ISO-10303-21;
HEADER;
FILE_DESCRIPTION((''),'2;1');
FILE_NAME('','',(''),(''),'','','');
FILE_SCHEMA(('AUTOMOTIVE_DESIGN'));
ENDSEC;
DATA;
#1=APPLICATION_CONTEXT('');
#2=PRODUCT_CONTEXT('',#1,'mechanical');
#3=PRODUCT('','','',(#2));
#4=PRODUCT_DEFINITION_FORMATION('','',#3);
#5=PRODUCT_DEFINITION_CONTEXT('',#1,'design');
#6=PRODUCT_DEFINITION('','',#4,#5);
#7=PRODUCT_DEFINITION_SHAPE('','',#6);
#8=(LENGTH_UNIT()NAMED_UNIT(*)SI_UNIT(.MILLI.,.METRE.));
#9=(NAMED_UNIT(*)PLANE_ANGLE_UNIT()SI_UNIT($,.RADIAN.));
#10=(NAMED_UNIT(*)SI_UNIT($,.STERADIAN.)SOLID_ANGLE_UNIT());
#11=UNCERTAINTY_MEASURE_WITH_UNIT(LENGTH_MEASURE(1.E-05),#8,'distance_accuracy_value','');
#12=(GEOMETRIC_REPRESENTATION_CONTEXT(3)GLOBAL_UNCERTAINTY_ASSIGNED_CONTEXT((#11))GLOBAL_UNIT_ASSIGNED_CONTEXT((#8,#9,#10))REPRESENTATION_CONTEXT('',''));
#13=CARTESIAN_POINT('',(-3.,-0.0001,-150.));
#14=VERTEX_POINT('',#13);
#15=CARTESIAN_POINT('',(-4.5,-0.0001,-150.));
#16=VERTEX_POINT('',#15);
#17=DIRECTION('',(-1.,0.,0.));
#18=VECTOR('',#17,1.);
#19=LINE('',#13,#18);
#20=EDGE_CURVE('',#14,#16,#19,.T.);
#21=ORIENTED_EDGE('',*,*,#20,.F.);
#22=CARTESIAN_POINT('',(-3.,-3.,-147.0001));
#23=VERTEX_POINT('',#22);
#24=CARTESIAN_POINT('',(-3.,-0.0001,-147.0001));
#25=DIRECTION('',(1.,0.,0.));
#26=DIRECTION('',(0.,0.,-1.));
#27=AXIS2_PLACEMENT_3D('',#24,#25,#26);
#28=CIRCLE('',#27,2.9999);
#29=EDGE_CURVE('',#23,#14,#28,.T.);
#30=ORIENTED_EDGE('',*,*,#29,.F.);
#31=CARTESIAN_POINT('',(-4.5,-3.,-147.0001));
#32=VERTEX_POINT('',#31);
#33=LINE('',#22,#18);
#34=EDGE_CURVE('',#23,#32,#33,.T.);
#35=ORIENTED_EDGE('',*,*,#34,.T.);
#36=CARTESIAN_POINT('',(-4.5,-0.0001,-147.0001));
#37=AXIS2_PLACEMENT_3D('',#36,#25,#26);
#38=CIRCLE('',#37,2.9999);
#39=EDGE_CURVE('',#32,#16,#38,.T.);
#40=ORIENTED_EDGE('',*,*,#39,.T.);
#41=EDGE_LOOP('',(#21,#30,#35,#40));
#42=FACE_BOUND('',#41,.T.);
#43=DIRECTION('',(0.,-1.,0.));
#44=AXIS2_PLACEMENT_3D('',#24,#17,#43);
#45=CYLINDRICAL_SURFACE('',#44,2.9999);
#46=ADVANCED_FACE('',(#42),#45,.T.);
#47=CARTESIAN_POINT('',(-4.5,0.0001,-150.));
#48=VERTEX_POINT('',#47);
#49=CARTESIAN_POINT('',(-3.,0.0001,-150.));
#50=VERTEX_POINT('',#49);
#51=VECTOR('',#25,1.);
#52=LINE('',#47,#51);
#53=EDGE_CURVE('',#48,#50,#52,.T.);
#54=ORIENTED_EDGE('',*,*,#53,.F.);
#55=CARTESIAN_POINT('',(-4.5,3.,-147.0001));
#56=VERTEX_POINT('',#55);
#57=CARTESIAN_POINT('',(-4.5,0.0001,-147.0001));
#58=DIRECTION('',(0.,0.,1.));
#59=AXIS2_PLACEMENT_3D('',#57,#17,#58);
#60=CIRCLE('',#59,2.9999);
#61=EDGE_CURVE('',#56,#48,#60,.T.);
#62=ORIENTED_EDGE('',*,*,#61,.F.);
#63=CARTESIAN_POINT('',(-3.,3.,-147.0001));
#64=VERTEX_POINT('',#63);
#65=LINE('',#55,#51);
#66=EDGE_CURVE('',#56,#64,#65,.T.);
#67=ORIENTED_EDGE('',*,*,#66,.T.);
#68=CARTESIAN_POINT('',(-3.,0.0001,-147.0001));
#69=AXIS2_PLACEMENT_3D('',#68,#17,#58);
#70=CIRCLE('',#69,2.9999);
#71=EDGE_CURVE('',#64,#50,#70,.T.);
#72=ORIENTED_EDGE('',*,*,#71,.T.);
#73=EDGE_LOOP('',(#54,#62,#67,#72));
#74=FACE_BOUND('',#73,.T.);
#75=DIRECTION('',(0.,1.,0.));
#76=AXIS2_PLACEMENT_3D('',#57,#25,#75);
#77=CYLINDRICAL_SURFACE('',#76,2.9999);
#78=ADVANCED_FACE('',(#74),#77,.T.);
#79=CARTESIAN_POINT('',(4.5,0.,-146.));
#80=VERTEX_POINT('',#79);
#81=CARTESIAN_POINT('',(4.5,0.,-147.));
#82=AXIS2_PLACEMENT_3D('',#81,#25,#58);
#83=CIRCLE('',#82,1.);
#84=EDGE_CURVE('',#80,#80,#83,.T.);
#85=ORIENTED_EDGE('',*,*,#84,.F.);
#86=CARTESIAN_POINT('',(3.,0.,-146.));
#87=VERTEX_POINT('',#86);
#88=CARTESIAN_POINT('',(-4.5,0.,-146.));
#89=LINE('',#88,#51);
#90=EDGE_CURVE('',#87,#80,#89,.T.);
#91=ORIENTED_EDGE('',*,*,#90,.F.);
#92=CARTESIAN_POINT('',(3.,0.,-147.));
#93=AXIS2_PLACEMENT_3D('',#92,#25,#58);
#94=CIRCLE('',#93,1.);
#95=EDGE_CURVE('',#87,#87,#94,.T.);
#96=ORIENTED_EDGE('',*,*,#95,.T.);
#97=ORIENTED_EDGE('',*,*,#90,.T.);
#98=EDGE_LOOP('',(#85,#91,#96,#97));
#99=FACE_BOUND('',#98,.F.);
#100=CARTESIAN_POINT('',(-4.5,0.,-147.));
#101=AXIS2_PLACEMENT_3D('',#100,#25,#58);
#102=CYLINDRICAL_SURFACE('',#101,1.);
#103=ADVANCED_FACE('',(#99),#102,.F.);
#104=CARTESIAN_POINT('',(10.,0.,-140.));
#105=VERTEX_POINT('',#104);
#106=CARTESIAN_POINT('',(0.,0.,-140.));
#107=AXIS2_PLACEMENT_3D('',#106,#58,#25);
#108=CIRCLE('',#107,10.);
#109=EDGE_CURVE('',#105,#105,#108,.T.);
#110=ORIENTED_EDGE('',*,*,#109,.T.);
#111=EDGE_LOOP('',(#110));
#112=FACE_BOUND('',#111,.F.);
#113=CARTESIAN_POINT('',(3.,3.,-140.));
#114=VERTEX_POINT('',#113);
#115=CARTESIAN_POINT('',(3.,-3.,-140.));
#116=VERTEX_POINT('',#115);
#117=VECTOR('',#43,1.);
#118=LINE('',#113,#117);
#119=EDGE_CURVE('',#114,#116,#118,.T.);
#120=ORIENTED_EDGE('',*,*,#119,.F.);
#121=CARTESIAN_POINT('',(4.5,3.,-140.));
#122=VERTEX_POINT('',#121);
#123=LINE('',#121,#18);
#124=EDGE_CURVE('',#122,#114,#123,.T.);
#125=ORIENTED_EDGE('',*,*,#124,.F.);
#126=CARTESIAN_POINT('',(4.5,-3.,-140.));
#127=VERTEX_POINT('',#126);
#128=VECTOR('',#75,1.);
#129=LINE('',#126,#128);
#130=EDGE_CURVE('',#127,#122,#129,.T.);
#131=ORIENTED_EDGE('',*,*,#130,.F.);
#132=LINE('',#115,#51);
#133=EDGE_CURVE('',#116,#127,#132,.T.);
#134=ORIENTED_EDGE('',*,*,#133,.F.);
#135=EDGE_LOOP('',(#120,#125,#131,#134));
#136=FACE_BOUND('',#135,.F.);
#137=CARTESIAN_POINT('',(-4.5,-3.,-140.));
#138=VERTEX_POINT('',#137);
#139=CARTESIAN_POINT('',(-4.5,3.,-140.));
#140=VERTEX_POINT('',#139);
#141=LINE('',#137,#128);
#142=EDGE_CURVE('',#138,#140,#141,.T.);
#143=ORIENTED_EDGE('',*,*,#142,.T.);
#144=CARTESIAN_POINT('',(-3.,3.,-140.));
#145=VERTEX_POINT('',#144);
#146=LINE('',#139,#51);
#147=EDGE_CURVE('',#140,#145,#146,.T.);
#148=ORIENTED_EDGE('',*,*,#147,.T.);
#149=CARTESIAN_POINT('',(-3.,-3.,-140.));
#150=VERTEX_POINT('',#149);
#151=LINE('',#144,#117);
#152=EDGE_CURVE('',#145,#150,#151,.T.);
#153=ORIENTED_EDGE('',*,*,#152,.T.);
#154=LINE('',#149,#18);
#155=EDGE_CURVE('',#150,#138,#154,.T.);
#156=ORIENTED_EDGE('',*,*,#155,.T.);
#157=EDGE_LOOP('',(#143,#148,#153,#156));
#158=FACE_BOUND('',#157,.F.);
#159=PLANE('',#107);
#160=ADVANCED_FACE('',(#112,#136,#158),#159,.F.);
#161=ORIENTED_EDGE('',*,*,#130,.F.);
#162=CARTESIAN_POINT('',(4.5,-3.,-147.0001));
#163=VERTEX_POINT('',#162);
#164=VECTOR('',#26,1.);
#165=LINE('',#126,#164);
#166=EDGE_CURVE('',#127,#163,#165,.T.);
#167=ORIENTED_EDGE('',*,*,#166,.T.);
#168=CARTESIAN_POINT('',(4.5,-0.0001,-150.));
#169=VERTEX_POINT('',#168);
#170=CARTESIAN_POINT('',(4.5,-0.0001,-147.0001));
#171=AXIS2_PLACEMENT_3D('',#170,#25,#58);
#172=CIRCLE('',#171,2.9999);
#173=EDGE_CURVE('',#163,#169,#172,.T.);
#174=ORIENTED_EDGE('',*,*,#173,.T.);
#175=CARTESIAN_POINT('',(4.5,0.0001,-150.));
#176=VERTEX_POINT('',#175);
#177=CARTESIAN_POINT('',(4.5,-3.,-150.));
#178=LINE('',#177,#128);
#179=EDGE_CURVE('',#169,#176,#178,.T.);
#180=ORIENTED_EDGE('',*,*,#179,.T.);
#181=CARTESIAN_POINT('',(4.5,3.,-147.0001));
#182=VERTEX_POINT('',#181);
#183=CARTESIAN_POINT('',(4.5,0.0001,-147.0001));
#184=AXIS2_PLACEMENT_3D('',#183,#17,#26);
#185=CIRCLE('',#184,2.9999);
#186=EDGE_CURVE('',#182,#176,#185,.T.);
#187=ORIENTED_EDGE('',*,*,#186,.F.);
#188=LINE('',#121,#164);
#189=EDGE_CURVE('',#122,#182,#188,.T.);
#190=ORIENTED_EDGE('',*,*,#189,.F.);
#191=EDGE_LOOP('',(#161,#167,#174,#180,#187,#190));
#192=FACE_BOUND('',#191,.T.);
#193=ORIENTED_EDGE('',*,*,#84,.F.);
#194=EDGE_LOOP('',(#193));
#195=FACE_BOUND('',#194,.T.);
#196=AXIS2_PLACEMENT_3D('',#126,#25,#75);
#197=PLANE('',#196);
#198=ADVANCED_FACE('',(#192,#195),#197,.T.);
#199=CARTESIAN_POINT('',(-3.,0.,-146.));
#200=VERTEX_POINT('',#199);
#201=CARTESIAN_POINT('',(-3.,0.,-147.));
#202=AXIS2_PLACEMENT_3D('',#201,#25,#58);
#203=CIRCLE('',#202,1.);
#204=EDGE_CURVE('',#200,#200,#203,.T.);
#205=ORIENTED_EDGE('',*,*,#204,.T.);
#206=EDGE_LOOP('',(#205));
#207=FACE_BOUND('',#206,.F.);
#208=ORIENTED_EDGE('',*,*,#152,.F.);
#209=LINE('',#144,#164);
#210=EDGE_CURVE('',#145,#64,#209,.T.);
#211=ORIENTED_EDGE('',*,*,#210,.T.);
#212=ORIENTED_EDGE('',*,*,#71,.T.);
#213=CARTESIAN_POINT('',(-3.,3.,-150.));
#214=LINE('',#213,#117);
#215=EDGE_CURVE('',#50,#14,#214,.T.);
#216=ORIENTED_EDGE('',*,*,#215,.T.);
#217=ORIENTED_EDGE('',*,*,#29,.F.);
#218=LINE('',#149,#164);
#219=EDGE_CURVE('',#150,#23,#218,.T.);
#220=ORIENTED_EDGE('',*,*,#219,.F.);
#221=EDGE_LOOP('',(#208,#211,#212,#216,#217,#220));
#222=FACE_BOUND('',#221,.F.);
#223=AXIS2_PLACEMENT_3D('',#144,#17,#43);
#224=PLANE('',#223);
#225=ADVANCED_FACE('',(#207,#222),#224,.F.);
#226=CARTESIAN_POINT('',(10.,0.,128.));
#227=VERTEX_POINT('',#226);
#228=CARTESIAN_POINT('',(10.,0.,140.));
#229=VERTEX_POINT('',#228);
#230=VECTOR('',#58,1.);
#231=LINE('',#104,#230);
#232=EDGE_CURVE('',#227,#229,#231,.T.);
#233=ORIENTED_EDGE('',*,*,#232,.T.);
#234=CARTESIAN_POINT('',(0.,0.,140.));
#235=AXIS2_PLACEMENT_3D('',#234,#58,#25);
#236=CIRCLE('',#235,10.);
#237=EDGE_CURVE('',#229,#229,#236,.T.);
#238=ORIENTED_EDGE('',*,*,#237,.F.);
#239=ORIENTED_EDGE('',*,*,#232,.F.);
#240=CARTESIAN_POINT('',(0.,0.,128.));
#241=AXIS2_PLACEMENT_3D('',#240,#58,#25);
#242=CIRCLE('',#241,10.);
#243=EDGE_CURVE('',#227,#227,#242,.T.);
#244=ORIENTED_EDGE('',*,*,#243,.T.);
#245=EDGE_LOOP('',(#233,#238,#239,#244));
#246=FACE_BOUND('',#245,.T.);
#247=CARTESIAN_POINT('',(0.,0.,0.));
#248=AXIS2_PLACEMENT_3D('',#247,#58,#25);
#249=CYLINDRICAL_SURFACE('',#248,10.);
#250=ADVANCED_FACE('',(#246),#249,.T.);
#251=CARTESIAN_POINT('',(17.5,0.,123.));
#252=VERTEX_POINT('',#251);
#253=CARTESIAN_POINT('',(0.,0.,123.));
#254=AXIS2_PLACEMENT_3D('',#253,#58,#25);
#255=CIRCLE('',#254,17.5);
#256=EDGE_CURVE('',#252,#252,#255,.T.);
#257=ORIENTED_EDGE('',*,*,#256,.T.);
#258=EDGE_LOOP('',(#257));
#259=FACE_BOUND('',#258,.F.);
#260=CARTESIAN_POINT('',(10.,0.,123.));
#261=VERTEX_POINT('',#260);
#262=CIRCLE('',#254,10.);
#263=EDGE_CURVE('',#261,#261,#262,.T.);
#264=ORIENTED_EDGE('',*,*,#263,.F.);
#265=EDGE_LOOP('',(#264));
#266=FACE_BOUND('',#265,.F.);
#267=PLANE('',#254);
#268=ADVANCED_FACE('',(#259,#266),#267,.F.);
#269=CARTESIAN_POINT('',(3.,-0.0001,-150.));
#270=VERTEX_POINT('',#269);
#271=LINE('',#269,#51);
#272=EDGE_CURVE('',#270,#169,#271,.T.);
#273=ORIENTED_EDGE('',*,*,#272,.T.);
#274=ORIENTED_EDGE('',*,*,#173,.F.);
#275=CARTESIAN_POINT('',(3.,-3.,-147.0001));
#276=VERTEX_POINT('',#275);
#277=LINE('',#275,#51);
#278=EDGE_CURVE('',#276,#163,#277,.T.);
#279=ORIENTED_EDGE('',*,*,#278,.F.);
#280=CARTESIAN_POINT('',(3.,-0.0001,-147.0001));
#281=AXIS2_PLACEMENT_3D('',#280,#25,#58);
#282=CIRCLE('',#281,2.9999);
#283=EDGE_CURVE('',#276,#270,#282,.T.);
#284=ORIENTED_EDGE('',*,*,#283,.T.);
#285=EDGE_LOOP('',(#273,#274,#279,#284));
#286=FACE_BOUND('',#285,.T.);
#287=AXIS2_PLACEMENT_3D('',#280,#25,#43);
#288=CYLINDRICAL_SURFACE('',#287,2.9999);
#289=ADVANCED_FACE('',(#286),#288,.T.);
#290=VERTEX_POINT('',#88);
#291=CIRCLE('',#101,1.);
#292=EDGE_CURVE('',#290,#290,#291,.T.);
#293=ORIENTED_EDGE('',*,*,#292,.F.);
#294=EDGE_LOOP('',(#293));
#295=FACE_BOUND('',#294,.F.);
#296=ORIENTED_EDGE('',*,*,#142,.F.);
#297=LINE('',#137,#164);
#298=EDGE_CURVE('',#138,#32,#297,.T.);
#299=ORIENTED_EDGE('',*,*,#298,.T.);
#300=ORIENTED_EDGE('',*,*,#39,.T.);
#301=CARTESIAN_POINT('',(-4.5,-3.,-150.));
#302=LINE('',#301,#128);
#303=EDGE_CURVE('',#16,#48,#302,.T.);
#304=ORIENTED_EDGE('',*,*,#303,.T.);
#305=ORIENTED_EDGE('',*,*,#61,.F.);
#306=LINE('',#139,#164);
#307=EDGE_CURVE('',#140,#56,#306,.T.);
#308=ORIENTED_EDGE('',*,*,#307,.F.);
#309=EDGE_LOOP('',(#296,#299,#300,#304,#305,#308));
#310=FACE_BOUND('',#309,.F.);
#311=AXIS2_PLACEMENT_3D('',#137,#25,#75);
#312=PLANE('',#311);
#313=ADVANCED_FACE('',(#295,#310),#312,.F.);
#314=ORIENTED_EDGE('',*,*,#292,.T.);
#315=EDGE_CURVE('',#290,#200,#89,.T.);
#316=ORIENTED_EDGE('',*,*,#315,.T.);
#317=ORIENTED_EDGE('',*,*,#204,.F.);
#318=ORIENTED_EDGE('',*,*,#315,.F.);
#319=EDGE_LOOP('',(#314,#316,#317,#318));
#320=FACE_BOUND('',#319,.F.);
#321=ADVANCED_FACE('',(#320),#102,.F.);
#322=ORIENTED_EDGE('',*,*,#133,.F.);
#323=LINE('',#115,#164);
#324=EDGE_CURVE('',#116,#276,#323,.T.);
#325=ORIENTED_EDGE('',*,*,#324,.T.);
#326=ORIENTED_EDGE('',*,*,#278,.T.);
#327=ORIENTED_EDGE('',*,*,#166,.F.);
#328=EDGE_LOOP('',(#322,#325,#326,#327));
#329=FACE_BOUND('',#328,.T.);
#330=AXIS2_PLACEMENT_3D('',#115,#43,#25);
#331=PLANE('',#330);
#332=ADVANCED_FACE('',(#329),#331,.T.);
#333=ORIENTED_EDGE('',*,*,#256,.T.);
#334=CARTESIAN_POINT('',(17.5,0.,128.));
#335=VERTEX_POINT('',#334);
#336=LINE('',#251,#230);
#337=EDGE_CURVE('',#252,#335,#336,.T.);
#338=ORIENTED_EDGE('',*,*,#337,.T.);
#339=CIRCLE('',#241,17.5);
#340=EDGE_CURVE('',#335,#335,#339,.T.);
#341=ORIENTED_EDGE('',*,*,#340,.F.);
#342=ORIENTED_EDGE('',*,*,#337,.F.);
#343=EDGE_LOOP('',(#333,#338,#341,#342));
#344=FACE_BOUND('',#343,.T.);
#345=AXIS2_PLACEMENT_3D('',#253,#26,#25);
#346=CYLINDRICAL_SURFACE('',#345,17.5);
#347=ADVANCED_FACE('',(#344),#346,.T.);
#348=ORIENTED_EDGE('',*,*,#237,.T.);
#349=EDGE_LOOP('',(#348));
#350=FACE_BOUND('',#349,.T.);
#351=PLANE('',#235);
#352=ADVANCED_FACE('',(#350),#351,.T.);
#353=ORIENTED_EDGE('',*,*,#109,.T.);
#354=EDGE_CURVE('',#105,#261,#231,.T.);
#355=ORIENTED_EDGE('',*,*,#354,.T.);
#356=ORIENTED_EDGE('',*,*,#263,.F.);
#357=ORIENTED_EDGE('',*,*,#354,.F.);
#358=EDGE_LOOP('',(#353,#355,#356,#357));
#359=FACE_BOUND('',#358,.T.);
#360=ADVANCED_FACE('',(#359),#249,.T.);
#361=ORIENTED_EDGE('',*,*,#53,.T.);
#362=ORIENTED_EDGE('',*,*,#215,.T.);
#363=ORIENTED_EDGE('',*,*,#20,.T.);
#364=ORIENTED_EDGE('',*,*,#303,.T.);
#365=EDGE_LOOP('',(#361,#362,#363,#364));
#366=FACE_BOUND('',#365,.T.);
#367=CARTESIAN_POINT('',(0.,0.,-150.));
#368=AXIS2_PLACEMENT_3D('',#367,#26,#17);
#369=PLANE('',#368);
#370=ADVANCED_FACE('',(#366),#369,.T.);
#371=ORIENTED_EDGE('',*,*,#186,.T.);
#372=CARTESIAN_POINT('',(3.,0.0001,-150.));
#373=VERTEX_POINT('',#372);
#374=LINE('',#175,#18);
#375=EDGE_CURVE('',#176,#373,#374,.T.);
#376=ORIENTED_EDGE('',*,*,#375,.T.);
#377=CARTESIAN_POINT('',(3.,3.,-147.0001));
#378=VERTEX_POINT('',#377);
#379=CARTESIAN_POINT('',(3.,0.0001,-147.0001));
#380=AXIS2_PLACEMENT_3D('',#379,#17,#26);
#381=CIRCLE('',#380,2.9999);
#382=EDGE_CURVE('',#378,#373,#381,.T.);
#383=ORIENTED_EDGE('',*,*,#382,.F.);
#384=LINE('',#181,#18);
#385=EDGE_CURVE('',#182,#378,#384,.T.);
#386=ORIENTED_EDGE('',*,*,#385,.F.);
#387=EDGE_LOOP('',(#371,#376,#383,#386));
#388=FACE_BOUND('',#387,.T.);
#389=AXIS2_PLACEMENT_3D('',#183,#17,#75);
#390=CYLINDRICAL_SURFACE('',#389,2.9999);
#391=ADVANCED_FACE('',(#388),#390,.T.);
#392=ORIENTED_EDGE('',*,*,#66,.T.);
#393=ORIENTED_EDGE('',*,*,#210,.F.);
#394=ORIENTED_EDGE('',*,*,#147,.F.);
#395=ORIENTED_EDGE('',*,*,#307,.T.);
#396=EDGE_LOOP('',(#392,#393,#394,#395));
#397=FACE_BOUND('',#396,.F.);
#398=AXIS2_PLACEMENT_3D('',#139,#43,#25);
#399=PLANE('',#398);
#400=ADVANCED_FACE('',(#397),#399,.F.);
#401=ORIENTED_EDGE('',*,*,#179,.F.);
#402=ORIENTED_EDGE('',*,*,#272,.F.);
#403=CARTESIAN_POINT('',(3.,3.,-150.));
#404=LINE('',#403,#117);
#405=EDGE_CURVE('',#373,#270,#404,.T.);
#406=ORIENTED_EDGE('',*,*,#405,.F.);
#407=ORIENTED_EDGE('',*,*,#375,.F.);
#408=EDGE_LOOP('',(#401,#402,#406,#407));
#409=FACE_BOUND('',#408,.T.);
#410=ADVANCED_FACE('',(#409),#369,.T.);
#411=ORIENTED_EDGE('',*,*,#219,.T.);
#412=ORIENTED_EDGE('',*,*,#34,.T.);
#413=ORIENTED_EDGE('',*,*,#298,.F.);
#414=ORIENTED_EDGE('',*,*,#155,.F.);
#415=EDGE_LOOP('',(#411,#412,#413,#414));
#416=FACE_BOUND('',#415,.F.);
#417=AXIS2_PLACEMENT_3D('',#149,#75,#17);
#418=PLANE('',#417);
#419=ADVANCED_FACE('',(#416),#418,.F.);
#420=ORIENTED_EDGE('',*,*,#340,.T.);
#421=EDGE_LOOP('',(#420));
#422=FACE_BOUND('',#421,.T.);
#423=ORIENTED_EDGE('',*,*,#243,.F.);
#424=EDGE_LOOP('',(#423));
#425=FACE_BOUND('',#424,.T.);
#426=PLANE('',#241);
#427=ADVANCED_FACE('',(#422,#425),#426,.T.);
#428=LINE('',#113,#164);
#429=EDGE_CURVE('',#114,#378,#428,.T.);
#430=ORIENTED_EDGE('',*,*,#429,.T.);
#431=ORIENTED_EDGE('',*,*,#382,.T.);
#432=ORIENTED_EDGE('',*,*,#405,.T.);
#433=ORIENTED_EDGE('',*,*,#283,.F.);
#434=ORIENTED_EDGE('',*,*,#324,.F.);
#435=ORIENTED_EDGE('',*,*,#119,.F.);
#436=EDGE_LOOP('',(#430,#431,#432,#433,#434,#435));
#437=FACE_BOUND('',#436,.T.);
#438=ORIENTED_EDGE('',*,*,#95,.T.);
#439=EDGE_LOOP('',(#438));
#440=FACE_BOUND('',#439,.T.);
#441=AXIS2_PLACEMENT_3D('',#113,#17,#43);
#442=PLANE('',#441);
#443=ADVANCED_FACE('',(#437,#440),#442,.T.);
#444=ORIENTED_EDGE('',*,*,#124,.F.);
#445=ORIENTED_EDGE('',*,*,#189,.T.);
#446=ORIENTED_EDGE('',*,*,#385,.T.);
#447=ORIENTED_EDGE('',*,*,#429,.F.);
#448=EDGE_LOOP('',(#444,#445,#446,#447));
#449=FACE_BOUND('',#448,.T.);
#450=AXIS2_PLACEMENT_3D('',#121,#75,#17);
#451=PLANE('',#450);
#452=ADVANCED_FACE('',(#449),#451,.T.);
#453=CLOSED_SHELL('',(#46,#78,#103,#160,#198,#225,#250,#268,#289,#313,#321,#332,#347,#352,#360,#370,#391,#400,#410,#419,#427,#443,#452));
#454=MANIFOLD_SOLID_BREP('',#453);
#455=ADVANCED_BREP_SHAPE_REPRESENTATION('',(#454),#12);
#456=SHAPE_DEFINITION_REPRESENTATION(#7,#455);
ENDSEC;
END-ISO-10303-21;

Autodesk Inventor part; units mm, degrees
ref_plane "YZ Plane" through (0, 0, 0) normal (1, 0, 0) x (0, 1, 0)
ref_plane "XZ Plane" through (0, 0, 0) normal (0, 1, 0) x (-1, 0, 0)
ref_plane "XY Plane" through (0, 0, 0) normal (0, 0, 1) x (1, 0, 0)
sketch "草图1" plane through (0, 0, 0) normal (0, 0, 1) x (1, 0, 0)
  circle A0 centre (0, 0) radius 10
  dimension "d0" = 20
extrude "拉伸1" add sketch "草图1" along normal mid plane 280
sketch "草图2" plane through (0, 0, -140) normal (0, 0, -1) x (-1, 0, 0)
  line L0 (-4.5, 3) -> (-3, 3)
  line L1 (-3, 3) -> (-3, -3)
  line L2 (-3, -3) -> (-4.5, -3)
  line L3 (-4.5, -3) -> (-4.5, 3)
  line L4 (0, 0) -> (0, 6.2448)
  line L5 (4.5, 3) -> (3, 3)
  line L6 (3, 3) -> (3, -3)
  line L7 (3, -3) -> (4.5, -3)
  line L8 (4.5, -3) -> (4.5, 3)
  point P0 (-3, 0)
  point P1 (3, 0)
  dimension "d3" = 1.5
  dimension "d4" = 6
  dimension "d5" = 6
extrude "拉伸2" add sketch "草图2" along normal blind 10
full round fillet "全圆角1" first side at (4, -3, -143.3333) centre faces at (4, 1, -150) second side at (3.5, 3, -143.3333)
full round fillet "全圆角2" first side at (-3.5, -3, -143.3333) centre faces at (-3.5, 1, -150) second side at (-4, 3, -143.3333)
sketch "草图3" plane through (-4.5, -3, -140) normal (-1, 0, 0) x (0, 0, 1)
  arc A0 (-7, 6) -> (-7, 0) centre (-7, 3) ccw projected
  point P0 (140, 3)
hole "孔1" at (-4.5, 0, -147) direction (1, 0, 0) diameter 2 end through all
ref_plane "工作平面1" through (0, 0, 123) normal (0, 0, 1) x (1, 0, 0)
sketch "草图4" plane through (0, 0, 123) normal (0, 0, 1) x (1, 0, 0)
  circle A0 centre (0, 0) radius 17.5
  dimension "d16" = 35
extrude "拉伸3" add sketch "草图4" along normal blind 5
properties part number "顶杆"
